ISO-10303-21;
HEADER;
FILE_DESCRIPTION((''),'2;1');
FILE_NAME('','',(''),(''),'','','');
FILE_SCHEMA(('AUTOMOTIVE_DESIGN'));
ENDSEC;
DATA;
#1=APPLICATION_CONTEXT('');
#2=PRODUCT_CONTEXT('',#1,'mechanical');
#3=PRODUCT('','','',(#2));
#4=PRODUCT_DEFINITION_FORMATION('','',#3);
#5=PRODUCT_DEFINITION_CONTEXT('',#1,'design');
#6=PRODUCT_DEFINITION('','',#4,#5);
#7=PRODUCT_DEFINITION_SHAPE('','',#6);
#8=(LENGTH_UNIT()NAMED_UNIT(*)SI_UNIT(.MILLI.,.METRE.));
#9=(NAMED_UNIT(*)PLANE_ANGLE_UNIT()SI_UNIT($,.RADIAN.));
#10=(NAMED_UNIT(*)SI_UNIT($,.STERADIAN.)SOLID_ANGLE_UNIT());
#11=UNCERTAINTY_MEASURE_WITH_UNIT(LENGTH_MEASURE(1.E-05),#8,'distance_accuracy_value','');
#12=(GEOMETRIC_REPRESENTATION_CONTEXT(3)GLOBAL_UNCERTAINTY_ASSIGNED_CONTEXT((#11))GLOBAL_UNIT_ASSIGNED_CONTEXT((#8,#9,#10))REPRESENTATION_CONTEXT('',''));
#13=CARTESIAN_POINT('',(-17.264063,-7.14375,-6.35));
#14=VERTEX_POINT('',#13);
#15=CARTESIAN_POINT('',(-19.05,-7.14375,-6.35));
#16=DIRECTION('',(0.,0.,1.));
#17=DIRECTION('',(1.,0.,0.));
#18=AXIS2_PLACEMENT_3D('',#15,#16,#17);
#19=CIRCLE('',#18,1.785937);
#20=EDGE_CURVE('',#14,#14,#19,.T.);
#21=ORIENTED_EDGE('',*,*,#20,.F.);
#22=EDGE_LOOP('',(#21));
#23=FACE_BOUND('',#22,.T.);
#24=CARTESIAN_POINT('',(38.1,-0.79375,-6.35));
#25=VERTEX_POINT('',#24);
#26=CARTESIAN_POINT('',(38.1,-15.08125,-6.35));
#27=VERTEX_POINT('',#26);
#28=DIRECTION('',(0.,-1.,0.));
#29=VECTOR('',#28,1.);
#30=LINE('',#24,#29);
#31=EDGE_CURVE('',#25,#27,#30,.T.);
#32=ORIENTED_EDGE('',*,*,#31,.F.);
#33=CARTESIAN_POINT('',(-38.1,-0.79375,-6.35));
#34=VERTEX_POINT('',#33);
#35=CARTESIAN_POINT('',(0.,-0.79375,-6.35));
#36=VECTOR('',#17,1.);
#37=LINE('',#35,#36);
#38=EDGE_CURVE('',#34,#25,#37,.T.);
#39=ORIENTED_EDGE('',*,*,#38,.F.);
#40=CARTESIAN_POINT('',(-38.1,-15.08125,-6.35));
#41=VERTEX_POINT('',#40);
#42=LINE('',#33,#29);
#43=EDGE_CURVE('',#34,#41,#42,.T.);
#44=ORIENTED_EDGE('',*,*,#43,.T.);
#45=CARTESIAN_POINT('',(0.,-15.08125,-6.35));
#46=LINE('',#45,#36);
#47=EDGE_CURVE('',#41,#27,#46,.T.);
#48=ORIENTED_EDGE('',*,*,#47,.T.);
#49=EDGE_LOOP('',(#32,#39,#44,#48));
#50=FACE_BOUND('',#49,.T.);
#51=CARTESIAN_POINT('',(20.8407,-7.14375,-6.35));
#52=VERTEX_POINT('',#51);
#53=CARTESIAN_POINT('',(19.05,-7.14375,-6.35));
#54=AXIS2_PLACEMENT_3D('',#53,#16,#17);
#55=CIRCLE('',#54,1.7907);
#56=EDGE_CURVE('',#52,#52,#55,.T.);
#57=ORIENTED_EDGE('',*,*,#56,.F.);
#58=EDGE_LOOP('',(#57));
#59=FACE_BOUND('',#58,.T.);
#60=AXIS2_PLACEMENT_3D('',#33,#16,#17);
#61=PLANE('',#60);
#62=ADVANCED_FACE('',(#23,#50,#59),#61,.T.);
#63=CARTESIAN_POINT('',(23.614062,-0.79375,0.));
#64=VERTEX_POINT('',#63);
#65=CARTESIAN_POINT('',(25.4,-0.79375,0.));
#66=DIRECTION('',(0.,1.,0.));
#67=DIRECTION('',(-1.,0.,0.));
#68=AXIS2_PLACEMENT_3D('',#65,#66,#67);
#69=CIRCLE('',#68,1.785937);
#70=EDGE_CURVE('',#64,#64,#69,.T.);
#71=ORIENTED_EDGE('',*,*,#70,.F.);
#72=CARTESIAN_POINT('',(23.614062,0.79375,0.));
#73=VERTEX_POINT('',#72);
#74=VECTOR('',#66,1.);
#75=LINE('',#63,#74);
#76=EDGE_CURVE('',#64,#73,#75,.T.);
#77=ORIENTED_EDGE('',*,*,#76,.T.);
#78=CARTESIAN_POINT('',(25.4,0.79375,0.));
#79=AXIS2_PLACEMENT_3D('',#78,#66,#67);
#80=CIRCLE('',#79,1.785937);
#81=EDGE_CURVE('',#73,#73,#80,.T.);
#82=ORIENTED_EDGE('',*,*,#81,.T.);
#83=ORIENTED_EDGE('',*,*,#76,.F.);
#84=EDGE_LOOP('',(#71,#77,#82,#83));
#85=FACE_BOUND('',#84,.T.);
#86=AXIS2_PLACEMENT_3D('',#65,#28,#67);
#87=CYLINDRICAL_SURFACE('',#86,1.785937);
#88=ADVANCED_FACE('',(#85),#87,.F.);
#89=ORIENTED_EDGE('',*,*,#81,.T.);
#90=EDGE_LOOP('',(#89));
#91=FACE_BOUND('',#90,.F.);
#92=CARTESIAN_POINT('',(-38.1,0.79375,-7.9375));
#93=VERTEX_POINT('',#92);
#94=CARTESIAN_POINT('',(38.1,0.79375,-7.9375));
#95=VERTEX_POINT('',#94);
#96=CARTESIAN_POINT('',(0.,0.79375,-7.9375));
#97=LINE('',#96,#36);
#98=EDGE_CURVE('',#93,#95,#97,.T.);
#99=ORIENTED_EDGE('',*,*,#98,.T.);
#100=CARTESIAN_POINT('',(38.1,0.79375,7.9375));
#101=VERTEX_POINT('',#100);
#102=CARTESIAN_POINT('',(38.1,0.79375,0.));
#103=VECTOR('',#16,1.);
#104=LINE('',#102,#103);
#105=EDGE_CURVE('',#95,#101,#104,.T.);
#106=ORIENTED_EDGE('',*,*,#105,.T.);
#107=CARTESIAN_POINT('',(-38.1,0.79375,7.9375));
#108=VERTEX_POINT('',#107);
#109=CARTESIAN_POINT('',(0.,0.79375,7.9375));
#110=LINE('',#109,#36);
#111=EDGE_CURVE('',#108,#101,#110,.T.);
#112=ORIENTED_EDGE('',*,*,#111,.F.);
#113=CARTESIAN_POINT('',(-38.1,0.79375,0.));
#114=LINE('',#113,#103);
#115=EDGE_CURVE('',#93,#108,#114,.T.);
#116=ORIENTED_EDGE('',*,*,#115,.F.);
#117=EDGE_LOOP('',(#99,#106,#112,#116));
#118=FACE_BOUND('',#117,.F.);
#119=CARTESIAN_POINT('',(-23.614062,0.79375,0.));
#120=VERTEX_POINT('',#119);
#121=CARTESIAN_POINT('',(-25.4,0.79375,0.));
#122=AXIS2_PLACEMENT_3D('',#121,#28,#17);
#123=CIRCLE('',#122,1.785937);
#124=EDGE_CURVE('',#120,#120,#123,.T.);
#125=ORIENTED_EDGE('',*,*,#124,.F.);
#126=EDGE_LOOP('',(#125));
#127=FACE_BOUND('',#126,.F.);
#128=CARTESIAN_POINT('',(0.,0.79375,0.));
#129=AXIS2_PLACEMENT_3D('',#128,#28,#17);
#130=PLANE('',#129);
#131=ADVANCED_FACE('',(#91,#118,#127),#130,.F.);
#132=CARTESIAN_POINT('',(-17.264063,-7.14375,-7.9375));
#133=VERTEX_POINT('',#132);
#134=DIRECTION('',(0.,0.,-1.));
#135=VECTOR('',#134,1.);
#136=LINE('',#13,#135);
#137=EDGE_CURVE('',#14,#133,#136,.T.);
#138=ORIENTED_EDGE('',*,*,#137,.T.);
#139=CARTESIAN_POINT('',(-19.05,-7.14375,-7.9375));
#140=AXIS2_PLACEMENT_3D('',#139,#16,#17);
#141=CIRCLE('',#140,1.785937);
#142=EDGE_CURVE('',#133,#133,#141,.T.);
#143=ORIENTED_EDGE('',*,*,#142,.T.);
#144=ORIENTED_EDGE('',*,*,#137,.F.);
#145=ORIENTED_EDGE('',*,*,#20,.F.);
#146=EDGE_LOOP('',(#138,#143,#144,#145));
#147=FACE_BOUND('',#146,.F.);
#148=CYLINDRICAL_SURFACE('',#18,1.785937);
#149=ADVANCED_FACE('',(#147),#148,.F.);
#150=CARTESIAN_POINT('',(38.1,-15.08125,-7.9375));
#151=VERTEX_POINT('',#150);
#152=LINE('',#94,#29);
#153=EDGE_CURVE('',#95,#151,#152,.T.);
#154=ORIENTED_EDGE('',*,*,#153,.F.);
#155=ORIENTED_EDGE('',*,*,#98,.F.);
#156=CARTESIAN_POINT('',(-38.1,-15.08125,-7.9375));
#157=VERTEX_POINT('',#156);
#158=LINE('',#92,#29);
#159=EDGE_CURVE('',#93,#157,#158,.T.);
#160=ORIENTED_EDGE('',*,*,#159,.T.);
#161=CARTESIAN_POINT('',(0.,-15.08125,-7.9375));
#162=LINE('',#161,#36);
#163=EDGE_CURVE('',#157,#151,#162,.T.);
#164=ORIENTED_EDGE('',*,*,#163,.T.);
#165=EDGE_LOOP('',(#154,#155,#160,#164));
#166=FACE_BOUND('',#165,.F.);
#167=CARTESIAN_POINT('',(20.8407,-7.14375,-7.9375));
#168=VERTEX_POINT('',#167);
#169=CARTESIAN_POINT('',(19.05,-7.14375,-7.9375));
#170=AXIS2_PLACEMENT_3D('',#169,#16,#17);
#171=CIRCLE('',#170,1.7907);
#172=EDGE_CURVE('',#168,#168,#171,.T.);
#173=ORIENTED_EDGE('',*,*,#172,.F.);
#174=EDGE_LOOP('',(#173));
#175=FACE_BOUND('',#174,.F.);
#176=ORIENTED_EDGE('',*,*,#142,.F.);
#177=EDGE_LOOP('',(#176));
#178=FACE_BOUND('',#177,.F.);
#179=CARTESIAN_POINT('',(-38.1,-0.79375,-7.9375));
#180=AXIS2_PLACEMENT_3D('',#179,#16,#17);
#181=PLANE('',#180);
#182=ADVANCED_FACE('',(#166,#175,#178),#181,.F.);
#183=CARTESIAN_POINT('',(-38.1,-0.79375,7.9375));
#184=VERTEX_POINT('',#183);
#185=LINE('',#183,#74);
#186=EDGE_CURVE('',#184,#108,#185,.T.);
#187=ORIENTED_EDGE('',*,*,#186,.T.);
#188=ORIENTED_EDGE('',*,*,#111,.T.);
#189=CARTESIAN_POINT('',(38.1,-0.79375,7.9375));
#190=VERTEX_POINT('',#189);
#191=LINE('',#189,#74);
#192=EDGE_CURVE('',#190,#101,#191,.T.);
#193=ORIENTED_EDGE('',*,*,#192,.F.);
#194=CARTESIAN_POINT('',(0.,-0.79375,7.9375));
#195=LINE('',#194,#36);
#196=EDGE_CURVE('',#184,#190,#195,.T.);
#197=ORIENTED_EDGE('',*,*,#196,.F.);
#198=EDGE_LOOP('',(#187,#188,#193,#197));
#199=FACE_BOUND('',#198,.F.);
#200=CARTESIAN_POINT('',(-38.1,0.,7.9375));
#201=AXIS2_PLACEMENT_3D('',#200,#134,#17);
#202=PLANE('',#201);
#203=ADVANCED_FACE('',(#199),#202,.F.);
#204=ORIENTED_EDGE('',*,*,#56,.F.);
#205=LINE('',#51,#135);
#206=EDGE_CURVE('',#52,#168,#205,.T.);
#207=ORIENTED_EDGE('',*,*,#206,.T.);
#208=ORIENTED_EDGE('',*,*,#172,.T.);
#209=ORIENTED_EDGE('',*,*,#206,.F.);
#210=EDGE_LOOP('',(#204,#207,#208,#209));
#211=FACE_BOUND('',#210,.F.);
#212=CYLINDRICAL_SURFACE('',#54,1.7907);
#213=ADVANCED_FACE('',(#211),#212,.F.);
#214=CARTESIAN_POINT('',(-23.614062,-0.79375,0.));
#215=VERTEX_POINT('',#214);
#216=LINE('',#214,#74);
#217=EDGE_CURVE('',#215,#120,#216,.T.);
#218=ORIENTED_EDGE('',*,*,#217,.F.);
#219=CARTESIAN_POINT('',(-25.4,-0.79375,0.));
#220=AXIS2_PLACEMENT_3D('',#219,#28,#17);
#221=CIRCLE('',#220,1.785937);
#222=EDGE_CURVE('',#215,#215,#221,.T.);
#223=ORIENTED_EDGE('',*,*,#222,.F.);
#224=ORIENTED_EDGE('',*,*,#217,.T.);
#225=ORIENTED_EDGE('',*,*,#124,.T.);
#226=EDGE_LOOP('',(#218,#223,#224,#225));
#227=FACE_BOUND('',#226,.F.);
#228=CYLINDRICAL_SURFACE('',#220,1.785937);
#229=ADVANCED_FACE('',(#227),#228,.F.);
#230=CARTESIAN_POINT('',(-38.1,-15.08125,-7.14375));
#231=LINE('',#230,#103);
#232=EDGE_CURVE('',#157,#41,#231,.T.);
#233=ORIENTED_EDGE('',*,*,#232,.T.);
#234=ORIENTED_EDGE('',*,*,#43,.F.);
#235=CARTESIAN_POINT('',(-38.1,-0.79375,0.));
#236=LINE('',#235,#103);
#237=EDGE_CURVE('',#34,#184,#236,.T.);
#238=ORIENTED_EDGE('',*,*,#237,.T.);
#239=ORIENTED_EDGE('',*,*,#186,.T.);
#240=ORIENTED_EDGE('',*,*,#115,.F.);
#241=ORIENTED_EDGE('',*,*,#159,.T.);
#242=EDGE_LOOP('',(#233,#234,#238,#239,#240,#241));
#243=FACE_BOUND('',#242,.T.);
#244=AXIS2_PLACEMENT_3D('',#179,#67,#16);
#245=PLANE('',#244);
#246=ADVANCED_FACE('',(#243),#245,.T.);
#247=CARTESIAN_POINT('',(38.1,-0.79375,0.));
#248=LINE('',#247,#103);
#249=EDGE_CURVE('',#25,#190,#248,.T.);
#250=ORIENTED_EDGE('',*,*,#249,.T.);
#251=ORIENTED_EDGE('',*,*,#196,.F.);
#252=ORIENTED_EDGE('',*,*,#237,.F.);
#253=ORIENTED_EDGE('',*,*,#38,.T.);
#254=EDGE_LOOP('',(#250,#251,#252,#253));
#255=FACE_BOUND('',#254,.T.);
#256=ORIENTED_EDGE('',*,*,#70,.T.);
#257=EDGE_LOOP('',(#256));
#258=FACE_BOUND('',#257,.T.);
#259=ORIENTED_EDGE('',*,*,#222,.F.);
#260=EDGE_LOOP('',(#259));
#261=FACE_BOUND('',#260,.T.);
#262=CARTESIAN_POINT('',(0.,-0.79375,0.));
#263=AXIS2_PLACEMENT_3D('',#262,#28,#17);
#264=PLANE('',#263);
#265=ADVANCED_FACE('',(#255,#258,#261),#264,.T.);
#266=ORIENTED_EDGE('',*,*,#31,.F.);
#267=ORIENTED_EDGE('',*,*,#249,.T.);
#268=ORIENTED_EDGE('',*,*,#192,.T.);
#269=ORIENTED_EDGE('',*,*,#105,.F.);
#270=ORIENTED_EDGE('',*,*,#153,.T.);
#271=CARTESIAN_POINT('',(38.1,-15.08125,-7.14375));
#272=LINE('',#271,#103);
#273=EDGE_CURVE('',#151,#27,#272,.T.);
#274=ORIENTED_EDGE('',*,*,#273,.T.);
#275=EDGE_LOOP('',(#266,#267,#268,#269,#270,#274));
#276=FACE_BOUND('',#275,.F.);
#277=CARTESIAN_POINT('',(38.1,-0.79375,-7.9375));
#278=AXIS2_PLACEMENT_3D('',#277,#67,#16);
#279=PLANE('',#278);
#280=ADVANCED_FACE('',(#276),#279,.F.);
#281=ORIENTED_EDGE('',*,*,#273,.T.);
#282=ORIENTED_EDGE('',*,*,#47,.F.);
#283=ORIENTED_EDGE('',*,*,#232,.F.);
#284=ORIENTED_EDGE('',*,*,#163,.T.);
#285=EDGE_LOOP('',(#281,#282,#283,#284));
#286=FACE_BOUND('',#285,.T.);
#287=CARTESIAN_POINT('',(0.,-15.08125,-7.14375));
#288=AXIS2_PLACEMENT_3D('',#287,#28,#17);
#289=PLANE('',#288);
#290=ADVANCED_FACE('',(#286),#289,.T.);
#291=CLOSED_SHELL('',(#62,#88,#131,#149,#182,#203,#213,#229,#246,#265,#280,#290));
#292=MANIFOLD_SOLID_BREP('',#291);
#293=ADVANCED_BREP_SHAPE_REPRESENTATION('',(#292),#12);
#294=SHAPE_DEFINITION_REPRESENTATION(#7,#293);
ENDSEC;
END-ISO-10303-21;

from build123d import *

# Parameters (mm, degrees)
F0_W     = 76.2
F0_H     = 15.875
F1_DEPTH = 0.79375
F2_R     = 1.7859375
F3_DEPTH = 1.5875
F4_W     = 76.2
F4_H     = 1.5875
F5_DEPTH = 14.2875
F6_R     = 1.7859375
F6_R_2   = 1.7907
F7_DEPTH = 1.5875


# Not quite as in the source:
# - a pattern or mirror of a feature is missing from the dataset's text; its kind, count and spacing are read off the source's solid


with BuildPart() as f1:
    # F0 (on Front) → F1 (new body, symmetric)
    with BuildSketch(Plane.XZ):
        Rectangle(F0_W, F0_H)
    extrude(amount=F1_DEPTH, both=True)

    # F2 (on face) → F3 (cut, through all)
    with BuildSketch(Plane.XZ.offset(0.79375)):
        with Locations((-25.4, 0)):
            Circle(F2_R)
    f3 = extrude(amount=-F3_DEPTH, mode=Mode.SUBTRACT)

    # F3_copies: F3 across plane
    add(f3.mirror(Plane(origin=(0, 0, 0), x_dir=(0, 0, 1), z_dir=(1, 0, 0))), mode=Mode.SUBTRACT)

    # F4 (on face) → F5 (join)
    with BuildSketch(Plane.XZ.offset(0.79375)):
        with Locations((0, -7.14375)):
            Rectangle(F4_W, F4_H)
    extrude(amount=F5_DEPTH)

    # F6 (on face) → F7 (cut, through all)
    with BuildSketch(Plane.XY.offset(-6.35)):
        with Locations((-19.05, -7.14375)):
            Circle(F6_R)
        with Locations((19.05, -7.14375)):
            Circle(F6_R_2)
    extrude(amount=-F7_DEPTH, mode=Mode.SUBTRACT)


solid = f1.part
